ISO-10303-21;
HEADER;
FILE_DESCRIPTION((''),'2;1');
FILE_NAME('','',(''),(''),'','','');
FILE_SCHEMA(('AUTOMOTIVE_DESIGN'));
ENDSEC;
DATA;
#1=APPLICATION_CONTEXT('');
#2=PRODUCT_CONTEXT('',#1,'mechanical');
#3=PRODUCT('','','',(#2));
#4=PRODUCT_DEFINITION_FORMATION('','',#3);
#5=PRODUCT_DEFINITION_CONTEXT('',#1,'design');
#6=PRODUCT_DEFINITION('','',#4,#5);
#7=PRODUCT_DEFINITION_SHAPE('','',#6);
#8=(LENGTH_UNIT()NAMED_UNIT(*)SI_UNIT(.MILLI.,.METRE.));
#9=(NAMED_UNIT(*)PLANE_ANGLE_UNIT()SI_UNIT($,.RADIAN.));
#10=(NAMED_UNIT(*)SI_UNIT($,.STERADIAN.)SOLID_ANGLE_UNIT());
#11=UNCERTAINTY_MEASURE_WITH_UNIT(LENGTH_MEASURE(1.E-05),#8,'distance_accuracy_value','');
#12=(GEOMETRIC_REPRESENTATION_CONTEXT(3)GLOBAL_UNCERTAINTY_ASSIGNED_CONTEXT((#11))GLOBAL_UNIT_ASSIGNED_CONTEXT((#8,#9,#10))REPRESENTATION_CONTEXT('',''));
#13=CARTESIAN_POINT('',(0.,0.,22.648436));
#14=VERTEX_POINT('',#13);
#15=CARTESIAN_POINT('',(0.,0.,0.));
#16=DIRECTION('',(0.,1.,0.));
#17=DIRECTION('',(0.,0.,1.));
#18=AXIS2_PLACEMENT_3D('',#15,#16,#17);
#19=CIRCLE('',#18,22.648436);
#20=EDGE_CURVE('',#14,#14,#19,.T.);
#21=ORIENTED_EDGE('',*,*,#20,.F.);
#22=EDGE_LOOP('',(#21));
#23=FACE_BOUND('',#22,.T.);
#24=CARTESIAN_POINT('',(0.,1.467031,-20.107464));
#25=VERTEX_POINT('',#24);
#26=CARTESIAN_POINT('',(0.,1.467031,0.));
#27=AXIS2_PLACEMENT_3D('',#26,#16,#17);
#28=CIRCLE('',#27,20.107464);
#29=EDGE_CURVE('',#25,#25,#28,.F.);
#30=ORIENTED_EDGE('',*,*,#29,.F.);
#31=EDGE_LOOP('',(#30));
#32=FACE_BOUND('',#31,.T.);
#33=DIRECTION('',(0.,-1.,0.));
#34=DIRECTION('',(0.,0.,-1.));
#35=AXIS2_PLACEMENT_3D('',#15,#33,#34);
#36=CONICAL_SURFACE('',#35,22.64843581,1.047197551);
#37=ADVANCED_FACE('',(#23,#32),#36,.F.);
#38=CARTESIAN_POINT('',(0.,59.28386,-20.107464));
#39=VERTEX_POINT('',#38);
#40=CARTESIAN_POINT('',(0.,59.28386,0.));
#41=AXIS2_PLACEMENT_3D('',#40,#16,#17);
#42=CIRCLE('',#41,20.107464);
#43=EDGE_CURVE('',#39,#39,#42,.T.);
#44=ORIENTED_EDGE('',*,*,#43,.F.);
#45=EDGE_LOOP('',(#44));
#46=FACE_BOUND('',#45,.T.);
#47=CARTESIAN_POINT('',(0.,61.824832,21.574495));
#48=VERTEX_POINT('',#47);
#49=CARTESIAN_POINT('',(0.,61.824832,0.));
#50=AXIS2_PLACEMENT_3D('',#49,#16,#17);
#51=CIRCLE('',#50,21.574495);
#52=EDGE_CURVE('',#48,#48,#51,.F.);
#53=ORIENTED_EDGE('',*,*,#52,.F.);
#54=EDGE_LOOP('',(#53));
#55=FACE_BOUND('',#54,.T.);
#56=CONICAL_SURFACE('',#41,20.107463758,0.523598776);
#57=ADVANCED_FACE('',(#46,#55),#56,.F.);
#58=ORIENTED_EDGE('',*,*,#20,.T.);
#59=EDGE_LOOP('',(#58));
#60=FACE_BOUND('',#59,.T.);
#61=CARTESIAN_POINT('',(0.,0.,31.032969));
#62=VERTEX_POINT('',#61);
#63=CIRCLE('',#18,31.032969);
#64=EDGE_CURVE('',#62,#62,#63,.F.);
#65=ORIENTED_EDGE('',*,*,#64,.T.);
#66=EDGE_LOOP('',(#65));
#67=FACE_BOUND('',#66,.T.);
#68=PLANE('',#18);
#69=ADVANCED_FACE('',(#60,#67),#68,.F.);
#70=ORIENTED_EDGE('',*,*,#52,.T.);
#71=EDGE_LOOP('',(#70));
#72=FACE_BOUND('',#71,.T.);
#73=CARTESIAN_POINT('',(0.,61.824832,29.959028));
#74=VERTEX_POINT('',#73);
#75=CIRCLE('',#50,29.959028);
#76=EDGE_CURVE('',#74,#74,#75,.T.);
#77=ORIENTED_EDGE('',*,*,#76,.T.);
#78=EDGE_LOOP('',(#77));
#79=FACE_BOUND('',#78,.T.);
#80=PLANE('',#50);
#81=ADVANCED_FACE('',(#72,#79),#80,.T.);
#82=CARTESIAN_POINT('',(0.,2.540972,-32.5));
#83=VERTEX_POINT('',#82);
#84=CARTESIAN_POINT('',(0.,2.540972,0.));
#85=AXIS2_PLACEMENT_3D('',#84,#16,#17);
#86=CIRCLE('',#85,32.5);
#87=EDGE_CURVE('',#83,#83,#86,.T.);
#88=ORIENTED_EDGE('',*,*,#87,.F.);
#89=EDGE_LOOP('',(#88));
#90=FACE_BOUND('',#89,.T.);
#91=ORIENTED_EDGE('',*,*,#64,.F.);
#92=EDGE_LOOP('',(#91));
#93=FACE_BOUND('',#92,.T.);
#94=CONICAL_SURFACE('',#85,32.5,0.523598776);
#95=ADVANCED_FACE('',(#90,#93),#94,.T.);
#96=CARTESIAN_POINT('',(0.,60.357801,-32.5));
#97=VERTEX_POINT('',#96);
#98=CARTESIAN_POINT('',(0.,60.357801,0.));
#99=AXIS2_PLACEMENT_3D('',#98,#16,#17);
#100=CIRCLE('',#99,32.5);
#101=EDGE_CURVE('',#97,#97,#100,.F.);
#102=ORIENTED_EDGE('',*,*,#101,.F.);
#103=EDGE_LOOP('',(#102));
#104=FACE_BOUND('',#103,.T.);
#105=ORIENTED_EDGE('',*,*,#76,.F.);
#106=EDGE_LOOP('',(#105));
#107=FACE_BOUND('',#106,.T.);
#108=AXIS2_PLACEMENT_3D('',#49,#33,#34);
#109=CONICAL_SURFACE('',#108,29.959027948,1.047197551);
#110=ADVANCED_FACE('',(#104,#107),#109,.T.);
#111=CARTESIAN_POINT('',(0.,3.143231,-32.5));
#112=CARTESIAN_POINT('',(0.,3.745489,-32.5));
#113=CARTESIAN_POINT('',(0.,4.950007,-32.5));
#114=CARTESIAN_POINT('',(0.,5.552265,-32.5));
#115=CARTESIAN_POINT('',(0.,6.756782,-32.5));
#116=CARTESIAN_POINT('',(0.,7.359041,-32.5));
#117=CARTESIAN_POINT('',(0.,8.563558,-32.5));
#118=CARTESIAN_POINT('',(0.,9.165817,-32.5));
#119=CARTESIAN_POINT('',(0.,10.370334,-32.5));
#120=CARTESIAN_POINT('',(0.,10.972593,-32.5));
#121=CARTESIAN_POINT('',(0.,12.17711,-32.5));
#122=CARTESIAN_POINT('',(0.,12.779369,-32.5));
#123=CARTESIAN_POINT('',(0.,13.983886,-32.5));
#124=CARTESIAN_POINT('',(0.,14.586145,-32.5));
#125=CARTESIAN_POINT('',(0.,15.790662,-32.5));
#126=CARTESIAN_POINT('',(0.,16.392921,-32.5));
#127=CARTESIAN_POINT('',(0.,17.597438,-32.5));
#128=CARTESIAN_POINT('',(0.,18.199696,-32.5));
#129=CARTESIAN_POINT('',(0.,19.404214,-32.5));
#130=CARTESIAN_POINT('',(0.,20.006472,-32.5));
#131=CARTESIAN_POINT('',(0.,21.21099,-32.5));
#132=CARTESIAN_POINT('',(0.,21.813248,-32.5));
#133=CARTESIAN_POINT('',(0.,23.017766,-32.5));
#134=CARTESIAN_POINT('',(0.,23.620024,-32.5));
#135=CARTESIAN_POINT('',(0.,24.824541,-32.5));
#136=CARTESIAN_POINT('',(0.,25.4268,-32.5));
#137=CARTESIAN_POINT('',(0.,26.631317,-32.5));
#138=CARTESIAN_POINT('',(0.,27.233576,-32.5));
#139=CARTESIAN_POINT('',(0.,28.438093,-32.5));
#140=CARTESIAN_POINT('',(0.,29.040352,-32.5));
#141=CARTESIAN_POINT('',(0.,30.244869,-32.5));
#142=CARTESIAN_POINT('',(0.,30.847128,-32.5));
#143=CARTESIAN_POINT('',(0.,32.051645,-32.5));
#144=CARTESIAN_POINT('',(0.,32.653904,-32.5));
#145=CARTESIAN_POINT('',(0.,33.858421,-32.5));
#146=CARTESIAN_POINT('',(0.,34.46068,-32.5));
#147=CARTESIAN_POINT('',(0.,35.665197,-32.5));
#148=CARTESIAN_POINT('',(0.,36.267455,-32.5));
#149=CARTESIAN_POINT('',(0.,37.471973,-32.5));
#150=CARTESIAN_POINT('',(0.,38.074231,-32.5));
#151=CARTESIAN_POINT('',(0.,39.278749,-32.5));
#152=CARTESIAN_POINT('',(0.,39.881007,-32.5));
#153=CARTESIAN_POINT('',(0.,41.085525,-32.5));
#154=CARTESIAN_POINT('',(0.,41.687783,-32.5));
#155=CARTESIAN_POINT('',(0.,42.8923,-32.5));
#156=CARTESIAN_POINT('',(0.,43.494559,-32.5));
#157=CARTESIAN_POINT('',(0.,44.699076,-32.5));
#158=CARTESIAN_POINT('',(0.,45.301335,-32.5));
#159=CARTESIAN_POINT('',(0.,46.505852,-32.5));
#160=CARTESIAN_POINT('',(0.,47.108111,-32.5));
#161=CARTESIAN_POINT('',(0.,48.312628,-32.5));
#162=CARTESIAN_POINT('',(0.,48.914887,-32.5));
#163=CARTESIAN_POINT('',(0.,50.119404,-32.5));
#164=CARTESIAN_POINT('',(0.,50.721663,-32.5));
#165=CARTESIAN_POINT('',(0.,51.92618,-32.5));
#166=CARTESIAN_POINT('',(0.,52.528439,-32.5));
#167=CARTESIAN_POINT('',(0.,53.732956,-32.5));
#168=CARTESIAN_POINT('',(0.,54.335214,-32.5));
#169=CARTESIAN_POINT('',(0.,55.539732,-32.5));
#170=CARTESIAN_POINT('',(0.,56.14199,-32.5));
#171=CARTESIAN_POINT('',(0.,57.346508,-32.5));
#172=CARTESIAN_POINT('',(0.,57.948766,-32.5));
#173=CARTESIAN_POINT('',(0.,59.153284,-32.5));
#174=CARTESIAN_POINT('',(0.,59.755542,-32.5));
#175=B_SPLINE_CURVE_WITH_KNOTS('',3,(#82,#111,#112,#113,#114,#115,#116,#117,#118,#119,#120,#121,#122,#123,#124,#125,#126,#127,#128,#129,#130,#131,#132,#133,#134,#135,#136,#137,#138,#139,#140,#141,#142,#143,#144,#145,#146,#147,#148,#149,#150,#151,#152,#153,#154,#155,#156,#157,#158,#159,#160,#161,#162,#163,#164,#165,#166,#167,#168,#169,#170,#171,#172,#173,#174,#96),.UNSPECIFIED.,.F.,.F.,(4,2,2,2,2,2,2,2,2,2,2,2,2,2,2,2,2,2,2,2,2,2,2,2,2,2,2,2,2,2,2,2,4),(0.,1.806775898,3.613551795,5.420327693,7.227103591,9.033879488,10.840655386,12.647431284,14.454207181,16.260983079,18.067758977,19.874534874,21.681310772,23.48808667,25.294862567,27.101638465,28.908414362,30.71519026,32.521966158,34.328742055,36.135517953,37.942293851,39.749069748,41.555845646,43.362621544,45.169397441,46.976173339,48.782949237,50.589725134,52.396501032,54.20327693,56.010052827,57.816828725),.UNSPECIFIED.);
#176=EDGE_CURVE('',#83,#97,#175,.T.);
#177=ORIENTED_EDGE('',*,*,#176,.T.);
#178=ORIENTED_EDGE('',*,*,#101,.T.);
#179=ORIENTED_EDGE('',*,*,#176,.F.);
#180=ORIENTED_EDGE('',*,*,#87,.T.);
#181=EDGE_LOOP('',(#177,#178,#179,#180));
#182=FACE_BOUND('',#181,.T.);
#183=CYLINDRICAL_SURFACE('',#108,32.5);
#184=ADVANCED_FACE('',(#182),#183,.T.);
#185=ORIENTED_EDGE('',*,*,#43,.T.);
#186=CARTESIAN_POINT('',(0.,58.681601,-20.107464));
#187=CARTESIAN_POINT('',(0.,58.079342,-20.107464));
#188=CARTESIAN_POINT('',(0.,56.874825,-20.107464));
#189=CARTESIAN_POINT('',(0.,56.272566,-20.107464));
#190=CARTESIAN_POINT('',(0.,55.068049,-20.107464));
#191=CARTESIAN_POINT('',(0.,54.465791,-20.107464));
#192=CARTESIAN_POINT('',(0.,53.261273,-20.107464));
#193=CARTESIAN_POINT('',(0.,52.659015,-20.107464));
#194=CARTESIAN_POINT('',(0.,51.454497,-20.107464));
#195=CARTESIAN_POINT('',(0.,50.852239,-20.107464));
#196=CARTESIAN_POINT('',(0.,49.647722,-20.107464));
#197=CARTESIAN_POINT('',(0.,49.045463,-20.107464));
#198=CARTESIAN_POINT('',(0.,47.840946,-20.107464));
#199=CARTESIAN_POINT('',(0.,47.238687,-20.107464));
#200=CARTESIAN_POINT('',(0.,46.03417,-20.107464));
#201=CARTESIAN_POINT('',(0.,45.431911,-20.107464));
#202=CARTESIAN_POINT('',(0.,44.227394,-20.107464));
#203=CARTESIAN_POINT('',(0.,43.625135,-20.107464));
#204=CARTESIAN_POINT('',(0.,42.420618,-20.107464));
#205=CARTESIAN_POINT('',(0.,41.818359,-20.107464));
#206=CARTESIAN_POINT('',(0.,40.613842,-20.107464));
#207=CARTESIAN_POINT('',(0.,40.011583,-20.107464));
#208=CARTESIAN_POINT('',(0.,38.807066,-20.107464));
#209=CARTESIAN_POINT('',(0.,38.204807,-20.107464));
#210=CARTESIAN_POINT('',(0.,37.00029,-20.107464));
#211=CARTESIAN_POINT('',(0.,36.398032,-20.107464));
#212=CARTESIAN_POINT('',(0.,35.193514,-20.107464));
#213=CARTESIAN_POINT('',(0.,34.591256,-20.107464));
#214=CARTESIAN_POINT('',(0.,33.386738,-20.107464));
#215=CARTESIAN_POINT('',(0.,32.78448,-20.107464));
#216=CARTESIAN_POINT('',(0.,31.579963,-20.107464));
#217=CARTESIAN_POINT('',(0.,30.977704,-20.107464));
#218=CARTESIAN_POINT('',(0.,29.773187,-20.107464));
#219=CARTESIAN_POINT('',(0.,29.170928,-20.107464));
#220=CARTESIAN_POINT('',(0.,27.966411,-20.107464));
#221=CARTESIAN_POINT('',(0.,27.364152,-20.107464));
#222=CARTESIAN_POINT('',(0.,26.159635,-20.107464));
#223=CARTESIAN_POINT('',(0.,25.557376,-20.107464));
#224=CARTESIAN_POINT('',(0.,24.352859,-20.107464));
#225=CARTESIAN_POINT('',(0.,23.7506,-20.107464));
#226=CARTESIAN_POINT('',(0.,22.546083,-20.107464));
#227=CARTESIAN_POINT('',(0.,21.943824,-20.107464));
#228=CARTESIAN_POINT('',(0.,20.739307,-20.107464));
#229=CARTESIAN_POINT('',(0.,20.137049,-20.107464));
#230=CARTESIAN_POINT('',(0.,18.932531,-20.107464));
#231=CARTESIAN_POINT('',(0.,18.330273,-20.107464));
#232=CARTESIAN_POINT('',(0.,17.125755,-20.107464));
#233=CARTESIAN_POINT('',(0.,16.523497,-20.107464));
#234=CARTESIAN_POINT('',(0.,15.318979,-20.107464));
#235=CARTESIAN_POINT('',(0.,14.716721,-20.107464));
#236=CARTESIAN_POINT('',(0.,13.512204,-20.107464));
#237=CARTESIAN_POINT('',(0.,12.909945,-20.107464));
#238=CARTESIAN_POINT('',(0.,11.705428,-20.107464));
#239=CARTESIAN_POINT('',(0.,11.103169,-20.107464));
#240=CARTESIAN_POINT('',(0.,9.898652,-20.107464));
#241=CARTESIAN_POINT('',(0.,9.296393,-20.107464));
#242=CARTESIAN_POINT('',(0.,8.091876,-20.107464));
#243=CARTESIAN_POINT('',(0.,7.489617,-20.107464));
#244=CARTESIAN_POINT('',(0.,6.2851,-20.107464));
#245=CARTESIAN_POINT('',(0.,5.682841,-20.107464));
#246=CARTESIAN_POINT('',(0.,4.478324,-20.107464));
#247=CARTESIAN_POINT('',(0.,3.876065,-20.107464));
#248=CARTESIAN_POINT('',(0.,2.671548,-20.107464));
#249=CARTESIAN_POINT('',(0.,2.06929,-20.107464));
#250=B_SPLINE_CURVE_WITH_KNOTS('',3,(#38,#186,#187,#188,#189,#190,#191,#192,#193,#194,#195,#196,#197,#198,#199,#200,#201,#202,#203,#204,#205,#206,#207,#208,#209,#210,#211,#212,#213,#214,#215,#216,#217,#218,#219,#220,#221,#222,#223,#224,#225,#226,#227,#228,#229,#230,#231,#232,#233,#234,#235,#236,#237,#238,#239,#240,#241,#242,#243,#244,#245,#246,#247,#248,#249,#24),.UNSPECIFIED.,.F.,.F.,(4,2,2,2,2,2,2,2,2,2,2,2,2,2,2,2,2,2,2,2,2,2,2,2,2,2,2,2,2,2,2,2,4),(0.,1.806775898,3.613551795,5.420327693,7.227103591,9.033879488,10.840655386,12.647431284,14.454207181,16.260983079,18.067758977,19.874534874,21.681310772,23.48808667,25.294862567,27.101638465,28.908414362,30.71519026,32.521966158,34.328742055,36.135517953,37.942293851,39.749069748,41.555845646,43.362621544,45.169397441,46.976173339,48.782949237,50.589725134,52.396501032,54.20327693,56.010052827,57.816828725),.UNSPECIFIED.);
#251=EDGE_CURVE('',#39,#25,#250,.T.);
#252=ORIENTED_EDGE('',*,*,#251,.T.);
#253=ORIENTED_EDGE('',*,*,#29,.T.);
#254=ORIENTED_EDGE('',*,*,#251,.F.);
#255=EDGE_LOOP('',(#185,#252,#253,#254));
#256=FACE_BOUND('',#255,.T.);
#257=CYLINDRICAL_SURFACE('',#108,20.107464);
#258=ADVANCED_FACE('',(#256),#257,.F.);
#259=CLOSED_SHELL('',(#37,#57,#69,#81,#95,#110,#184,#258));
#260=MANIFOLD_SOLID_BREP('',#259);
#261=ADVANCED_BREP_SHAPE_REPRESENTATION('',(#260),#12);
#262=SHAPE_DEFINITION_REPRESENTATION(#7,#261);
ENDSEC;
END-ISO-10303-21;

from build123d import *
from OCP.BRepFilletAPI import BRepFilletAPI_MakeChamfer

# Parameters (mm, degrees)
SKETCH1_R           = 32.5
BOSS_EXTRUDE1_DEPTH = 61.824831675
SKETCH2_R           = 20.107463758
CUT_EXTRUDE1_DEPTH  = 78.037716813
CHAMFER1_SIZE       = 1.467030898
CHAMFER1_SIZE2      = 2.540972052


with BuildPart() as part:
    # Sketch1 → Boss-Extrude1 (new body)
    with BuildSketch(Plane(origin=(0, 0, 0), x_dir=(1, 0, 0), z_dir=(0, 1, 0))):
        Circle(SKETCH1_R)
    extrude(amount=BOSS_EXTRUDE1_DEPTH)

    # Sketch2 → Cut-Extrude1 (cut, through all)
    with BuildSketch(Plane(origin=(0, 0, 0), x_dir=(1, 0, 0), z_dir=(0, 1, 0))):
        Circle(SKETCH2_R)
    extrude(amount=CUT_EXTRUDE1_DEPTH, mode=Mode.SUBTRACT)

    # Chamfer1: one chamfer whose edges measure the first distance from different faces: ONE call of the kernel's chamfer builder (chamfer() names one face for all edges)
    chamfer1_edges_1 = [part.edges().sort_by_distance(p)[0] for p in [
        (-20.107463758, 61.824831675, 0),
    ]]
    chamfer1_side_1 = [part.faces().sort_by_distance(p)[0] for p in [
        (-31.580761184, 61.824831675, 0),
    ]]
    chamfer1_edges_2 = [part.edges().sort_by_distance(p)[0] for p in [
        (-20.107463758, 0, 0),
    ]]
    chamfer1_side_2 = [part.faces().sort_by_distance(p)[0] for p in [
        (-20.107463758, 30.912415838, 0),
    ]]
    chamfer1_edges_3 = [part.edges().sort_by_distance(p)[0] for p in [
        (-32.5, 0, 0),
    ]]
    chamfer1_side_3 = [part.faces().sort_by_distance(p)[0] for p in [
        (-31.580761184, 0, 0),
    ]]
    chamfer1_edges_4 = [part.edges().sort_by_distance(p)[0] for p in [
        (-32.5, 61.824831675, 0),
    ]]
    chamfer1_side_4 = [part.faces().sort_by_distance(p)[0] for p in [
        (-32.5, 30.912415838, 0),
    ]]
    chamfer1 = BRepFilletAPI_MakeChamfer(part.part.solid().wrapped)
    for e in chamfer1_edges_1:
        chamfer1.Add(CHAMFER1_SIZE, CHAMFER1_SIZE2, e.wrapped, chamfer1_side_1[0].wrapped)  # the first distance lies on this face
    for e in chamfer1_edges_2:
        chamfer1.Add(CHAMFER1_SIZE, CHAMFER1_SIZE2, e.wrapped, chamfer1_side_2[0].wrapped)  # the first distance lies on this face
    for e in chamfer1_edges_3:
        chamfer1.Add(CHAMFER1_SIZE, CHAMFER1_SIZE2, e.wrapped, chamfer1_side_3[0].wrapped)  # the first distance lies on this face
    for e in chamfer1_edges_4:
        chamfer1.Add(CHAMFER1_SIZE, CHAMFER1_SIZE2, e.wrapped, chamfer1_side_4[0].wrapped)  # the first distance lies on this face
    add(Compound.cast(chamfer1.Shape()), mode=Mode.REPLACE)


solid = part.part
